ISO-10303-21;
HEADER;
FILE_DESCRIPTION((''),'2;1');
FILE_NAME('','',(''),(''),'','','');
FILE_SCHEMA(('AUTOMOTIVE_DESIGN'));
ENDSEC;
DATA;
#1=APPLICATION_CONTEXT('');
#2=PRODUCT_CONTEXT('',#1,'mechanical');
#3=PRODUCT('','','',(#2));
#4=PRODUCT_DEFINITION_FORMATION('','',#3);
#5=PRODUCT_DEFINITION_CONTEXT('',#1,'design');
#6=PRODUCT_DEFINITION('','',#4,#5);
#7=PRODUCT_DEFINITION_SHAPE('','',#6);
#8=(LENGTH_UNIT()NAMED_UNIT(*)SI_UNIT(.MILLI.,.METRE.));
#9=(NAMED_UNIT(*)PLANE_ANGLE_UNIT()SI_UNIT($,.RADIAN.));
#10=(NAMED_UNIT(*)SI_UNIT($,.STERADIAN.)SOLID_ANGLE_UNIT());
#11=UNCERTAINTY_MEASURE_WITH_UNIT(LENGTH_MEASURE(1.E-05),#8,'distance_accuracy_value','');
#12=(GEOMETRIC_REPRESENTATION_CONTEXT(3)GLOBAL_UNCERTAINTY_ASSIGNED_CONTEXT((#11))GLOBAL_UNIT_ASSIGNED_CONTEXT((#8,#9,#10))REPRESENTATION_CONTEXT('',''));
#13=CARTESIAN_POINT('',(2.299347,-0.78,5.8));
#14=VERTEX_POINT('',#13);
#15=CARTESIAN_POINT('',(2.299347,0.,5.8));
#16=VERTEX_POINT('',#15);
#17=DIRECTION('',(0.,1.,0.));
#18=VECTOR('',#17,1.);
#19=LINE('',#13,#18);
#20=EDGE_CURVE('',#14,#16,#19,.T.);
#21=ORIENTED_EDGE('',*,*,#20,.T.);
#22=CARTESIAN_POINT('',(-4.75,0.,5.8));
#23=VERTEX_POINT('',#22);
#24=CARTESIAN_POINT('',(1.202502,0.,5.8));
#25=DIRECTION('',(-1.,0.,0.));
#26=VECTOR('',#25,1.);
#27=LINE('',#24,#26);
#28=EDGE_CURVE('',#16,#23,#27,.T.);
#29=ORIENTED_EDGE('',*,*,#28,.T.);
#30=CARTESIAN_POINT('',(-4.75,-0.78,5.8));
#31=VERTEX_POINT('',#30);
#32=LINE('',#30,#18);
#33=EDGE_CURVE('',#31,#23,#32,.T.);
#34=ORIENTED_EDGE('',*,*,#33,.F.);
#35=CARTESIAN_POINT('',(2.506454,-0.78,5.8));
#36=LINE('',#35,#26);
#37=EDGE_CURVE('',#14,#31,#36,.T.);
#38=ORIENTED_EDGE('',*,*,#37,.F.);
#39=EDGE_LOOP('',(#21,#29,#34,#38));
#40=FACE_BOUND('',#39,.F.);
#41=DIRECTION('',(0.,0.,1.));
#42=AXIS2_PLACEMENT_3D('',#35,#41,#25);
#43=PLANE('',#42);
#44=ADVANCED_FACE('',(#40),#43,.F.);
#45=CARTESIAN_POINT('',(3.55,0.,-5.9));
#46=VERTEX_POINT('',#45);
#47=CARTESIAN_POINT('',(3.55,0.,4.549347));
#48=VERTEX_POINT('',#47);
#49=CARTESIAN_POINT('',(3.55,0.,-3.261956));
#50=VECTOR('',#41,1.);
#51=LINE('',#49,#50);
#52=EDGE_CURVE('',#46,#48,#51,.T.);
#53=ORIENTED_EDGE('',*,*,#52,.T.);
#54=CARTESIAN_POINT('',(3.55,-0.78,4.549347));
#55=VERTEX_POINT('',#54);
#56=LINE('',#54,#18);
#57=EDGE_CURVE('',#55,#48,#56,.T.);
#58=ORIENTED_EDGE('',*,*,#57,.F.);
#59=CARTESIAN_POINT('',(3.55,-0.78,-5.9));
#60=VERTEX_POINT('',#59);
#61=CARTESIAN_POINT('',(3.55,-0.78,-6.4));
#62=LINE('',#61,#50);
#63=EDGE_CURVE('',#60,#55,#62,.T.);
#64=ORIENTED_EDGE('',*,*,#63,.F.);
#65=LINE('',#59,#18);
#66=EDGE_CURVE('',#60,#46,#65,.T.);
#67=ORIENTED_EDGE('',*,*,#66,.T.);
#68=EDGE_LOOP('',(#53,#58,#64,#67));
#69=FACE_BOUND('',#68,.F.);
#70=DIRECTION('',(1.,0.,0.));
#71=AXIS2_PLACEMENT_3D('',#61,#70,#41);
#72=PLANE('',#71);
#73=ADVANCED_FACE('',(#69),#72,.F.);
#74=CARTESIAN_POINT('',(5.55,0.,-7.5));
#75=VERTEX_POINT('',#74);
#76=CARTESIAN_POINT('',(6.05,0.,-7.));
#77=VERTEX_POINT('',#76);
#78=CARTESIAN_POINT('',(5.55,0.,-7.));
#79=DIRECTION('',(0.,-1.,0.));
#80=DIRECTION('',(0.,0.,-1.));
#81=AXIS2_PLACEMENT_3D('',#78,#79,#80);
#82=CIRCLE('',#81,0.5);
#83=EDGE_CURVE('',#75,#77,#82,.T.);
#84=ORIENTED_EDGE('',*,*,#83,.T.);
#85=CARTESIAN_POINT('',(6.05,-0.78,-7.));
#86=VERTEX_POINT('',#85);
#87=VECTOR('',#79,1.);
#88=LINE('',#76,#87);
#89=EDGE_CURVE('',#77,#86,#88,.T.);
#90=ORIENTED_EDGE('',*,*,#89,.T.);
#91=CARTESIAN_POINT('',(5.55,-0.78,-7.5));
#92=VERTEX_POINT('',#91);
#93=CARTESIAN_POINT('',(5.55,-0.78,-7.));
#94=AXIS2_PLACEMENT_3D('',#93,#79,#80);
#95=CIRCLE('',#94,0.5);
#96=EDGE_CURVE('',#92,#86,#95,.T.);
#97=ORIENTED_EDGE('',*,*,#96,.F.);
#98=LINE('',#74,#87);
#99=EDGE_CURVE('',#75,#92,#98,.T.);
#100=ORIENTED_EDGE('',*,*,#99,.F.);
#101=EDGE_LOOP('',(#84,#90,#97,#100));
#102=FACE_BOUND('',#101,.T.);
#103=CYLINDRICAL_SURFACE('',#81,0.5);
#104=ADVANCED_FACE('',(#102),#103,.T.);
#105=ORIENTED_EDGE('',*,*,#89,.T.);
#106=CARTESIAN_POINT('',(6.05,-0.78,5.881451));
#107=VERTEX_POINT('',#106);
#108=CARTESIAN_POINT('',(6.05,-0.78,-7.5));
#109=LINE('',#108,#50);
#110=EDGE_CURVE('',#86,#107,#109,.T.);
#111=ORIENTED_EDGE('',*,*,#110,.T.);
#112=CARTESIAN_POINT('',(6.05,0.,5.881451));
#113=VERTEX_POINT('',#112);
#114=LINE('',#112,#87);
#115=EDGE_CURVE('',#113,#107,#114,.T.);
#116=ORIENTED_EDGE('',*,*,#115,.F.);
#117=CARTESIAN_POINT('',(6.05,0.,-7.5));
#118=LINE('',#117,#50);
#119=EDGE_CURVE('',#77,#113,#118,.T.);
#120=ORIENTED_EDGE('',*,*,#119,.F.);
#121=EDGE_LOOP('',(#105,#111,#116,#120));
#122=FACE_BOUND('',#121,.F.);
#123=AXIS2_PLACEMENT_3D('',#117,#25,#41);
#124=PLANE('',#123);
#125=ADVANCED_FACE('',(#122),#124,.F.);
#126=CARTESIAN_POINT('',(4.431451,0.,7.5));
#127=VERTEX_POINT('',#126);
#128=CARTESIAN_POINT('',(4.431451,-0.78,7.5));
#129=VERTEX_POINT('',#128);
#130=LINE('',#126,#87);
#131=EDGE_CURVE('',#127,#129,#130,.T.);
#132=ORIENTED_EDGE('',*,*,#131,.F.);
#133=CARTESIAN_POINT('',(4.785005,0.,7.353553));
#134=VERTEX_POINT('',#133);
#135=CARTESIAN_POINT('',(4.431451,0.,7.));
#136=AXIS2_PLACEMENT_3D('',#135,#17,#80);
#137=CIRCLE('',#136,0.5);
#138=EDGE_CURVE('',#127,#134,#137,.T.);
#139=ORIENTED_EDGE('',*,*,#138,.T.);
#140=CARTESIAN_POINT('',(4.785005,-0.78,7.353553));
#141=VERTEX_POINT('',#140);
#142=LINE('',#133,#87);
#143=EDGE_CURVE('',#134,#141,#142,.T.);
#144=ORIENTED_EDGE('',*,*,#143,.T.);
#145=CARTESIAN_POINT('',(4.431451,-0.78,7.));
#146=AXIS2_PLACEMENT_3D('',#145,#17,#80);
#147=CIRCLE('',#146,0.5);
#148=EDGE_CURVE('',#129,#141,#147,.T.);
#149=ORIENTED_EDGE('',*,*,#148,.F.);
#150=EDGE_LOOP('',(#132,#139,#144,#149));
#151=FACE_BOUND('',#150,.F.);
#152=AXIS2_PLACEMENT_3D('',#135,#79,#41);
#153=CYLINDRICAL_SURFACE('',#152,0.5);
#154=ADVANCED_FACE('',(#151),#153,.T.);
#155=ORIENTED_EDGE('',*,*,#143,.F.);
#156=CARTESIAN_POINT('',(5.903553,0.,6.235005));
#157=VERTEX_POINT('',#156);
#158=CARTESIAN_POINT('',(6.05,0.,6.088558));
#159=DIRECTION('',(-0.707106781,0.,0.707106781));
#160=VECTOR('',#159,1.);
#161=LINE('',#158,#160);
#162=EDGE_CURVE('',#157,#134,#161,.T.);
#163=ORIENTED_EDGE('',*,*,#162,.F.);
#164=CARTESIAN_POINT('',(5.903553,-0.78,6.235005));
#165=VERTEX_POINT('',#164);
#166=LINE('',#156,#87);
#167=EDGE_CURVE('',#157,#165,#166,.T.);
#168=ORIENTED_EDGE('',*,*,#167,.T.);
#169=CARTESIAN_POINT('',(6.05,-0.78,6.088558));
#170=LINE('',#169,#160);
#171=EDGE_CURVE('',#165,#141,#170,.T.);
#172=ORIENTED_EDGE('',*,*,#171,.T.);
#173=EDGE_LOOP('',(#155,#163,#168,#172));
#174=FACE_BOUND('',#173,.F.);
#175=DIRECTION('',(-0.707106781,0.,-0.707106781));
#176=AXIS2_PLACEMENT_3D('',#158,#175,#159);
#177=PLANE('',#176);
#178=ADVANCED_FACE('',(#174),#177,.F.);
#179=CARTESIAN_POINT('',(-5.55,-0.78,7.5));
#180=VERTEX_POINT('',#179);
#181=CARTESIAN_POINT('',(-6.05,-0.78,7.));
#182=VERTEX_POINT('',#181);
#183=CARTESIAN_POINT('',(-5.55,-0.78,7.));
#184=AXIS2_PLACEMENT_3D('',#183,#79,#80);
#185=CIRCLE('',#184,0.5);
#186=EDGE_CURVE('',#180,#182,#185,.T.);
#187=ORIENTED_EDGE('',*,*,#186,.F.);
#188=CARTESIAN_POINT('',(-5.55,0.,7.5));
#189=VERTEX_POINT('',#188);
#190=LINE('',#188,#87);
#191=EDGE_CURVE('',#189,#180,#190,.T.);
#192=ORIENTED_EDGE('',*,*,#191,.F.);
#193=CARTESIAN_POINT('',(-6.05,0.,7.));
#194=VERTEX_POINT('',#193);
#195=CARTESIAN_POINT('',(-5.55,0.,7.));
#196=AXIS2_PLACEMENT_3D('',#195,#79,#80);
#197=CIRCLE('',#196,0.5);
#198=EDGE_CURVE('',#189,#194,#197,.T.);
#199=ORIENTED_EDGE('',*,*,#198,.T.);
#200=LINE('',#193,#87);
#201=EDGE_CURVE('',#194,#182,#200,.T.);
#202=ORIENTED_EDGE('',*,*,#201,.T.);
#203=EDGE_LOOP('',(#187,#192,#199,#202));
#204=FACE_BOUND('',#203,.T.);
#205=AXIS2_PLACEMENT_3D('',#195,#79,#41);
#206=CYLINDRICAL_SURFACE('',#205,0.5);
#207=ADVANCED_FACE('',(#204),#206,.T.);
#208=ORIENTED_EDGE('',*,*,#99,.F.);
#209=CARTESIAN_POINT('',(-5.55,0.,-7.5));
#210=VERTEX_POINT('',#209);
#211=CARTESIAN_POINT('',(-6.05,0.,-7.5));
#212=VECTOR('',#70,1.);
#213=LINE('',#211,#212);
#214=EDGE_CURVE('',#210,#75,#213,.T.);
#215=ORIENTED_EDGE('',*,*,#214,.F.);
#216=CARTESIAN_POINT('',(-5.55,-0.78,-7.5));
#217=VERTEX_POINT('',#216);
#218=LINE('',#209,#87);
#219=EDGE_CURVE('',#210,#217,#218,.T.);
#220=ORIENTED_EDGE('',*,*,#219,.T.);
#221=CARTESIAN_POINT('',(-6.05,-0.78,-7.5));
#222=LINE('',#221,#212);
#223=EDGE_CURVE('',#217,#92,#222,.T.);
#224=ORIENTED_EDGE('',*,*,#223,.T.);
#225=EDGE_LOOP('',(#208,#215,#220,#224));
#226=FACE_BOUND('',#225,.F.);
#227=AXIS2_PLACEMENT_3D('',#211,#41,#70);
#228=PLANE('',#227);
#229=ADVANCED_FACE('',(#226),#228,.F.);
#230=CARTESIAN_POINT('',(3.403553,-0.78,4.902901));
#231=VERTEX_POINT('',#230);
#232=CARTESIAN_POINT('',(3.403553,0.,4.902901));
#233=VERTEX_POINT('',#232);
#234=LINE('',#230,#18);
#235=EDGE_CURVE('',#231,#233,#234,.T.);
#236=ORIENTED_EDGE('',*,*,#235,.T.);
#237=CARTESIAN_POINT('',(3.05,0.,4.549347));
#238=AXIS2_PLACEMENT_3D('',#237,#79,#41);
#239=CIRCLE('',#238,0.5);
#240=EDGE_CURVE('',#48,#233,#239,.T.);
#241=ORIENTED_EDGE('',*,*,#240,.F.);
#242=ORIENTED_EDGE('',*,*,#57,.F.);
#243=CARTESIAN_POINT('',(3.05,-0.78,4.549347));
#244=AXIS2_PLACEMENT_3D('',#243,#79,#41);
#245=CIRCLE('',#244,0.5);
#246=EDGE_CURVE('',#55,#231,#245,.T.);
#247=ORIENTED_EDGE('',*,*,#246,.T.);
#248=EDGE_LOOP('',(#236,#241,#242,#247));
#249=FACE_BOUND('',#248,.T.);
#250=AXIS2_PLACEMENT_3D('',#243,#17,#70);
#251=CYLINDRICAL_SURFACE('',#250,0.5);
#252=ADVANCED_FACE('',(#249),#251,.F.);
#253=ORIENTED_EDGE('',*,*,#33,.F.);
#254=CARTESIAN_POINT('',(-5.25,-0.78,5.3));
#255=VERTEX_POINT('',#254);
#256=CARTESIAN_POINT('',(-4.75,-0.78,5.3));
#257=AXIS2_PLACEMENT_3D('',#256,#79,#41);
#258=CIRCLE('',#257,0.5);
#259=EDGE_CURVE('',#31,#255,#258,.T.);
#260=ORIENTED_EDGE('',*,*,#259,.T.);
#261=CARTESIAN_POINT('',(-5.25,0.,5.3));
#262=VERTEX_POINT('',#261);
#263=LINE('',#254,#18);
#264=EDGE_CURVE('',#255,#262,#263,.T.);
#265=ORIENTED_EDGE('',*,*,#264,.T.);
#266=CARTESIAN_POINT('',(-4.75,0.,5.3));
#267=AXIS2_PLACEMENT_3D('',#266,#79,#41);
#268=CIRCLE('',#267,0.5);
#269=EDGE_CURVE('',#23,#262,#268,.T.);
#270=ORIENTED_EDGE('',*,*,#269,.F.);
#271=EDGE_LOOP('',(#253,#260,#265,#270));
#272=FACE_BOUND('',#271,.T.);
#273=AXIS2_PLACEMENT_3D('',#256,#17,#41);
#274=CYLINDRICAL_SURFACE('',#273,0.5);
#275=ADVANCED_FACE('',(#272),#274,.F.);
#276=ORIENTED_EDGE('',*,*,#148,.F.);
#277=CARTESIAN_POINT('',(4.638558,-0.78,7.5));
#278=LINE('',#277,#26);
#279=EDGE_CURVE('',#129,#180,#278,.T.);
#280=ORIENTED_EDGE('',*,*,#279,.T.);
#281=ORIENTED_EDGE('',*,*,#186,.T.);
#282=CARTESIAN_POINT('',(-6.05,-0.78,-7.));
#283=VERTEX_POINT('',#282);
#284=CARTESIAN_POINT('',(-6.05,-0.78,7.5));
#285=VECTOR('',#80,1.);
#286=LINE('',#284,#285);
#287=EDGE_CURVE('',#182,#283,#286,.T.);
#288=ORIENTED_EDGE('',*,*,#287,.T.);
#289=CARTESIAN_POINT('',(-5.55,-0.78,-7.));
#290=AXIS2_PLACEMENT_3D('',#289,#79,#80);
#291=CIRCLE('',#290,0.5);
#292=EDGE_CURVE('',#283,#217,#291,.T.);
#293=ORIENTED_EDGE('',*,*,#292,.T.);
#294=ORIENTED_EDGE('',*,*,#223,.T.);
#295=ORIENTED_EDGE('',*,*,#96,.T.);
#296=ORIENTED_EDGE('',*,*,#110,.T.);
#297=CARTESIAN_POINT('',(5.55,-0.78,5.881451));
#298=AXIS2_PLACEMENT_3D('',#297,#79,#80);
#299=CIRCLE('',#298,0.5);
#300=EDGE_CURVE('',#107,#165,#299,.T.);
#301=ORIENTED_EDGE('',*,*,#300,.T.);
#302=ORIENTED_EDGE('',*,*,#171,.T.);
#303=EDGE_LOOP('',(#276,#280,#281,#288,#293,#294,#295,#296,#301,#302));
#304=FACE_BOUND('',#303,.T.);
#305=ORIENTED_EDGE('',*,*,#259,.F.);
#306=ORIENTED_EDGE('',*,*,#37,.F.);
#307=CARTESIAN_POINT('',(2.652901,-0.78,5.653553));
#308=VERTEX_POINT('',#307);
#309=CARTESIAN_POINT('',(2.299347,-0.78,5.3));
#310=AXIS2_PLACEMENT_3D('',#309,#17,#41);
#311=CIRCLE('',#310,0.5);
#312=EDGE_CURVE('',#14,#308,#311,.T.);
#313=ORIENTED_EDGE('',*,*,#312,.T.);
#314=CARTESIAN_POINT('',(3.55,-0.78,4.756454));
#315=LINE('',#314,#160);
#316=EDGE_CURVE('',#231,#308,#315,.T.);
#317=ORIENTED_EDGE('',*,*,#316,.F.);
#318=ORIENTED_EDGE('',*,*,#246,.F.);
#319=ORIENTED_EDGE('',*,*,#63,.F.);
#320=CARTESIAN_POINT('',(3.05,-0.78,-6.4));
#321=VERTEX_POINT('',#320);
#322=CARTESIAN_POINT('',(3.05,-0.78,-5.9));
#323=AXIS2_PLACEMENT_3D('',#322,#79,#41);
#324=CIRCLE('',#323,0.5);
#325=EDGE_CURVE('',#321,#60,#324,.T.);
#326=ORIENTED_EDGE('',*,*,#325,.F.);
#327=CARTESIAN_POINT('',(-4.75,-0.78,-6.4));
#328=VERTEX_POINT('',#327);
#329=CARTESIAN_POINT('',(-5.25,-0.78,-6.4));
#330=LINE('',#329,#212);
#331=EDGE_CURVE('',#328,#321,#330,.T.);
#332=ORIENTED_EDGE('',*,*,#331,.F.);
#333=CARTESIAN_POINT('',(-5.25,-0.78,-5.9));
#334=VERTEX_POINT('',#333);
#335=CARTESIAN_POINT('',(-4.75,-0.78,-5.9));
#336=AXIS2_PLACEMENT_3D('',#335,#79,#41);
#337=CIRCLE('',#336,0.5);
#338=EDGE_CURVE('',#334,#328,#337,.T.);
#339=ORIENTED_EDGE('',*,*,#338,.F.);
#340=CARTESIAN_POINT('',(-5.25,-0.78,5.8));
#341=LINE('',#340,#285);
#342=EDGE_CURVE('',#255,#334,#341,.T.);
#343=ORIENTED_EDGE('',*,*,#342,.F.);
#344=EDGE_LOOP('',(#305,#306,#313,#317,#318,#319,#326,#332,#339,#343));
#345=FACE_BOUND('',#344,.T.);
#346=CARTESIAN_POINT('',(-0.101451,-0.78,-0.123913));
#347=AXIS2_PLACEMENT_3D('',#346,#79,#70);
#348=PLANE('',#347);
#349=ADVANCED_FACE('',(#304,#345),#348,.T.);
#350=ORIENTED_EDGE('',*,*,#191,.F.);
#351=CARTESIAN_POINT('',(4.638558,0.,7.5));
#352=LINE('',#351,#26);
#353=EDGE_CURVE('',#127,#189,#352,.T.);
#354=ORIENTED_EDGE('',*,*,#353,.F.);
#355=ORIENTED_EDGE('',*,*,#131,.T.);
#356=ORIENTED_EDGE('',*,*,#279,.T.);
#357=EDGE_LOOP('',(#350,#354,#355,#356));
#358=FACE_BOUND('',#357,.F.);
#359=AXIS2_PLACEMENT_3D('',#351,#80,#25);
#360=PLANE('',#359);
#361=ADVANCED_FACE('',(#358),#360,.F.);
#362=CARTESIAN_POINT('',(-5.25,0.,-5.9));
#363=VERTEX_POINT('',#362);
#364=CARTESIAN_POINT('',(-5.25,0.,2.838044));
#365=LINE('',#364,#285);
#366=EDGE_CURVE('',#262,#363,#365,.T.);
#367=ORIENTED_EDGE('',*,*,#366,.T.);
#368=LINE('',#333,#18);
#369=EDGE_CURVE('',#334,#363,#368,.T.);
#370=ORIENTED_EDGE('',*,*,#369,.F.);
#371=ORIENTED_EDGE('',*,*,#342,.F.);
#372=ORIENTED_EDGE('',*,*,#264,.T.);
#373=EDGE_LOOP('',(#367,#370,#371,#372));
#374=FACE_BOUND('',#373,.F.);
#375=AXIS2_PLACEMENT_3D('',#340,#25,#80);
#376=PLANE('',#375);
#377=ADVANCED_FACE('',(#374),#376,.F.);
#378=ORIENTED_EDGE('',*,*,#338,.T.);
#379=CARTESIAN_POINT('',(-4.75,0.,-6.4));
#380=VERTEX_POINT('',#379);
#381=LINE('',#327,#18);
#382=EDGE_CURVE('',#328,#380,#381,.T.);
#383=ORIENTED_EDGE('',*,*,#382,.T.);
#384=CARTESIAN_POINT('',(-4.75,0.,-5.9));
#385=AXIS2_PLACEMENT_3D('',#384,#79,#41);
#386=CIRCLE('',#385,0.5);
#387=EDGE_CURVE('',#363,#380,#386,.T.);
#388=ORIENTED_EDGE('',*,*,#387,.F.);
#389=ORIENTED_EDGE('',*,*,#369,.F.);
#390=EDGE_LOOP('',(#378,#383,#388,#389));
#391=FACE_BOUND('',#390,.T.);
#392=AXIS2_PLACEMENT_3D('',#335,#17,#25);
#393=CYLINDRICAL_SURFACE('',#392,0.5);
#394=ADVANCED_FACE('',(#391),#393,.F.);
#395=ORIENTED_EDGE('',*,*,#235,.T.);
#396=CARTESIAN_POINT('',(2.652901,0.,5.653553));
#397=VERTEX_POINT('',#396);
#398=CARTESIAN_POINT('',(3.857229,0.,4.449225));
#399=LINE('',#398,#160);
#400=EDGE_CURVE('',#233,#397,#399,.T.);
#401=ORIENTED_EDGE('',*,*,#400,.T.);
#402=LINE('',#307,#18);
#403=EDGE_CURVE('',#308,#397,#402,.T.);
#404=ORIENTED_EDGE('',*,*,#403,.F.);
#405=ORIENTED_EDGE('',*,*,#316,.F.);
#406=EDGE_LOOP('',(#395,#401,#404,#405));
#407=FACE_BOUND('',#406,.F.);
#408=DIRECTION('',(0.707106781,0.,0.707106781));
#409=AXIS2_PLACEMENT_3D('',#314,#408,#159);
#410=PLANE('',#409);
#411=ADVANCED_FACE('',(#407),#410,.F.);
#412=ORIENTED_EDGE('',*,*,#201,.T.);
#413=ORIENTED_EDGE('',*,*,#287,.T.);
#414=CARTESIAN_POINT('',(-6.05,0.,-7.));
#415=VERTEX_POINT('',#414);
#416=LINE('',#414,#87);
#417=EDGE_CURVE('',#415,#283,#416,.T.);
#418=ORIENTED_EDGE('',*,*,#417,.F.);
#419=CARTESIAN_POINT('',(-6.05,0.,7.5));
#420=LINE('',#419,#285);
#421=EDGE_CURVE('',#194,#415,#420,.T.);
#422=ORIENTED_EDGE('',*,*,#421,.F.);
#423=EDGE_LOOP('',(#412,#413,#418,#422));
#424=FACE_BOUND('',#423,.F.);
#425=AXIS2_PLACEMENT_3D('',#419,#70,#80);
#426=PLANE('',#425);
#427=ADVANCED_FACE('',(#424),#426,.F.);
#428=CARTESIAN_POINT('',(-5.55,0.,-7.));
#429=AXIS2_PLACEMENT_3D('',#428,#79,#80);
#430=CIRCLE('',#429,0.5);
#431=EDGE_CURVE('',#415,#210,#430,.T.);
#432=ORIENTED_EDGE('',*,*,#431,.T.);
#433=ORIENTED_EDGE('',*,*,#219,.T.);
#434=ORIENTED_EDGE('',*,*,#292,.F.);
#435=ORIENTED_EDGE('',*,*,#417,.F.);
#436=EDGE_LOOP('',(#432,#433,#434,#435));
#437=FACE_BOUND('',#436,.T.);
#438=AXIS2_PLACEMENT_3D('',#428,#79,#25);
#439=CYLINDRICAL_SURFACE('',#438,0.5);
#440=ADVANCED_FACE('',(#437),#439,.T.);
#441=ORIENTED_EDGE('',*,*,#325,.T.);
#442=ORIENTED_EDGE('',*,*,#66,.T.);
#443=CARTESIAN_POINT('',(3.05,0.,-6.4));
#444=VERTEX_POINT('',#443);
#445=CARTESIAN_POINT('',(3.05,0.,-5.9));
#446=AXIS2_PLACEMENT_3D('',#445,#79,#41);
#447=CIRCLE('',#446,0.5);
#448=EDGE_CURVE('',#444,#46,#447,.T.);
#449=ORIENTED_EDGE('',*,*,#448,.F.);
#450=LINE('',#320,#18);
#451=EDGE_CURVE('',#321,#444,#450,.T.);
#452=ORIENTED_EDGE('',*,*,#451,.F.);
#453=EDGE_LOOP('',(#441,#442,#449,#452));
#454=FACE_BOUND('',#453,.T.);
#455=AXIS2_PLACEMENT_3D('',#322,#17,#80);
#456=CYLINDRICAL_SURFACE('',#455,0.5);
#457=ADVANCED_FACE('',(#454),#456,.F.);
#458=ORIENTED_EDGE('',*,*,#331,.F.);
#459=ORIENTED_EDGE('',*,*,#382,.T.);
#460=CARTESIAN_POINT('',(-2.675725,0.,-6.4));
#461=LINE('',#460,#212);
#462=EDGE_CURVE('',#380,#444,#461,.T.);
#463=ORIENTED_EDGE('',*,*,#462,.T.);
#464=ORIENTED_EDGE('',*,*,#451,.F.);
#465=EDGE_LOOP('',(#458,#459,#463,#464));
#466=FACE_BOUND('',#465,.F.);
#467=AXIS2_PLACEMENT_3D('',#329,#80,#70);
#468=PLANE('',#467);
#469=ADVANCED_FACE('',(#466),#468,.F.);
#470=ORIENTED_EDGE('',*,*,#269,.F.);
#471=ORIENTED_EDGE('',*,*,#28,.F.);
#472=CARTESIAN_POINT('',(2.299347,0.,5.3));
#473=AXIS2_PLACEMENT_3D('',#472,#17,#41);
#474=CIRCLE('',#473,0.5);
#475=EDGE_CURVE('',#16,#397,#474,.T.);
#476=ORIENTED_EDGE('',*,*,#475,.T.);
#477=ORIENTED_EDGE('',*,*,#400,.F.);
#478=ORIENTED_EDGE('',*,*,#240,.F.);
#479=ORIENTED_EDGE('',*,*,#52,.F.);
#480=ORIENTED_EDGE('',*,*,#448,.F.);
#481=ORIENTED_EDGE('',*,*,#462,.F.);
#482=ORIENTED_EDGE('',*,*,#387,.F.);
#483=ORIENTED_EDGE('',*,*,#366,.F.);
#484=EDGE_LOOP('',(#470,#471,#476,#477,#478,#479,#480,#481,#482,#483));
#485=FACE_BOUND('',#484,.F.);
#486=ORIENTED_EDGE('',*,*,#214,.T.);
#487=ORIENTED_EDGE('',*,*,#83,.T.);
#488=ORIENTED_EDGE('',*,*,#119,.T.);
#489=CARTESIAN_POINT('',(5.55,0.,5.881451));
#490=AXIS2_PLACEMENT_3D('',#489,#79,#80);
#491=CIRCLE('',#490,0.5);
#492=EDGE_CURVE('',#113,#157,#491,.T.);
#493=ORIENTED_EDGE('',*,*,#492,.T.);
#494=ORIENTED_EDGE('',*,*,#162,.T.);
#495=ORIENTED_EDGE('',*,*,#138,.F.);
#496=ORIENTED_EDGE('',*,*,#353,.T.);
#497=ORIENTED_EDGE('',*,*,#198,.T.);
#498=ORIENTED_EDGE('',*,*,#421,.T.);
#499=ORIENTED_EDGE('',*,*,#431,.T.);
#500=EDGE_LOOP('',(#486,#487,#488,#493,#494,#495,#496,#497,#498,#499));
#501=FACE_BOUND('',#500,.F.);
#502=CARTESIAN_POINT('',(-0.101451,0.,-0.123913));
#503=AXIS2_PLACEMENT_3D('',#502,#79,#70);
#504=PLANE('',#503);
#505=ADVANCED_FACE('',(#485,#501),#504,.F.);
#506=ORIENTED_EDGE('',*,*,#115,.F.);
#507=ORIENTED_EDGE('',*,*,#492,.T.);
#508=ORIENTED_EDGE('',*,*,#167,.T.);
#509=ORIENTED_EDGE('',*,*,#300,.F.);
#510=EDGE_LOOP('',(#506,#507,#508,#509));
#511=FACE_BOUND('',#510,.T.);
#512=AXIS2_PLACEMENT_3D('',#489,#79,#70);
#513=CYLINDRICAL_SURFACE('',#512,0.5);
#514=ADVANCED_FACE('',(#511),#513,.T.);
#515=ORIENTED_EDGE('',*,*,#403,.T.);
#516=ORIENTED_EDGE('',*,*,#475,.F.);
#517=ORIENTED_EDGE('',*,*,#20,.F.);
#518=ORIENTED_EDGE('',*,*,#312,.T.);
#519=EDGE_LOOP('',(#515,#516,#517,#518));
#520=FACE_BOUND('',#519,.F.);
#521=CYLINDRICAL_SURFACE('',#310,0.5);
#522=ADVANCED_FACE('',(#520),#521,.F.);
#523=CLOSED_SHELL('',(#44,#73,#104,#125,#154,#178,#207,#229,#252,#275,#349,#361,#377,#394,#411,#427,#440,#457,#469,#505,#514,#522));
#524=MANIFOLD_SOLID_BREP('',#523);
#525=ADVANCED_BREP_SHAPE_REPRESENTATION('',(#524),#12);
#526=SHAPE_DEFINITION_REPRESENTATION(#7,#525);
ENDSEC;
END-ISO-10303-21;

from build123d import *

# Parameters (mm, degrees)
F1_DEPTH = 0.78
F2_R     = 0.5
F4_DEPTH = 25
F5_R     = 0.5


with BuildPart() as f1:
    # F0 (on Front) → F1 (new body)
    with BuildSketch(Plane.XZ):
        Polygon((4.6385581188, 7.5), (-6.05, 7.5), (-6.05, -7.5), (6.05, -7.5), (6.05, 6.0885581188), align=None)
    extrude(amount=F1_DEPTH)

    # F2
    f2_edges = [f1.edges().sort_by_distance(p)[0] for p in [
        (-6.05, -0.39, 7.5),
        (-6.05, -0.39, -7.5),
        (6.05, -0.39, -7.5),
        (4.638558, -0.39, 7.5),
        (6.05, -0.39, 6.088558),
    ]]
    fillet(f2_edges, radius=F2_R)

    # F3 (on face) → F4 (cut)
    with BuildSketch(Plane.XZ.offset(0.78)):
        Polygon((2.5064539127, 5.8), (-5.25, 5.8), (-5.25, -6.4), (3.55, -6.4), (3.55, 4.7564539127), align=None)
    extrude(amount=-F4_DEPTH, mode=Mode.SUBTRACT)

    # F5
    f5_edges = [f1.edges().sort_by_distance(p)[0] for p in [
        (-5.25, -0.39, 5.8),
        (-5.25, -0.39, -6.4),
        (3.55, -0.39, -6.4),
        (3.55, -0.39, 4.756454),
        (2.506454, -0.39, 5.8),
    ]]
    fillet(f5_edges, radius=F5_R)


solid = f1.part
